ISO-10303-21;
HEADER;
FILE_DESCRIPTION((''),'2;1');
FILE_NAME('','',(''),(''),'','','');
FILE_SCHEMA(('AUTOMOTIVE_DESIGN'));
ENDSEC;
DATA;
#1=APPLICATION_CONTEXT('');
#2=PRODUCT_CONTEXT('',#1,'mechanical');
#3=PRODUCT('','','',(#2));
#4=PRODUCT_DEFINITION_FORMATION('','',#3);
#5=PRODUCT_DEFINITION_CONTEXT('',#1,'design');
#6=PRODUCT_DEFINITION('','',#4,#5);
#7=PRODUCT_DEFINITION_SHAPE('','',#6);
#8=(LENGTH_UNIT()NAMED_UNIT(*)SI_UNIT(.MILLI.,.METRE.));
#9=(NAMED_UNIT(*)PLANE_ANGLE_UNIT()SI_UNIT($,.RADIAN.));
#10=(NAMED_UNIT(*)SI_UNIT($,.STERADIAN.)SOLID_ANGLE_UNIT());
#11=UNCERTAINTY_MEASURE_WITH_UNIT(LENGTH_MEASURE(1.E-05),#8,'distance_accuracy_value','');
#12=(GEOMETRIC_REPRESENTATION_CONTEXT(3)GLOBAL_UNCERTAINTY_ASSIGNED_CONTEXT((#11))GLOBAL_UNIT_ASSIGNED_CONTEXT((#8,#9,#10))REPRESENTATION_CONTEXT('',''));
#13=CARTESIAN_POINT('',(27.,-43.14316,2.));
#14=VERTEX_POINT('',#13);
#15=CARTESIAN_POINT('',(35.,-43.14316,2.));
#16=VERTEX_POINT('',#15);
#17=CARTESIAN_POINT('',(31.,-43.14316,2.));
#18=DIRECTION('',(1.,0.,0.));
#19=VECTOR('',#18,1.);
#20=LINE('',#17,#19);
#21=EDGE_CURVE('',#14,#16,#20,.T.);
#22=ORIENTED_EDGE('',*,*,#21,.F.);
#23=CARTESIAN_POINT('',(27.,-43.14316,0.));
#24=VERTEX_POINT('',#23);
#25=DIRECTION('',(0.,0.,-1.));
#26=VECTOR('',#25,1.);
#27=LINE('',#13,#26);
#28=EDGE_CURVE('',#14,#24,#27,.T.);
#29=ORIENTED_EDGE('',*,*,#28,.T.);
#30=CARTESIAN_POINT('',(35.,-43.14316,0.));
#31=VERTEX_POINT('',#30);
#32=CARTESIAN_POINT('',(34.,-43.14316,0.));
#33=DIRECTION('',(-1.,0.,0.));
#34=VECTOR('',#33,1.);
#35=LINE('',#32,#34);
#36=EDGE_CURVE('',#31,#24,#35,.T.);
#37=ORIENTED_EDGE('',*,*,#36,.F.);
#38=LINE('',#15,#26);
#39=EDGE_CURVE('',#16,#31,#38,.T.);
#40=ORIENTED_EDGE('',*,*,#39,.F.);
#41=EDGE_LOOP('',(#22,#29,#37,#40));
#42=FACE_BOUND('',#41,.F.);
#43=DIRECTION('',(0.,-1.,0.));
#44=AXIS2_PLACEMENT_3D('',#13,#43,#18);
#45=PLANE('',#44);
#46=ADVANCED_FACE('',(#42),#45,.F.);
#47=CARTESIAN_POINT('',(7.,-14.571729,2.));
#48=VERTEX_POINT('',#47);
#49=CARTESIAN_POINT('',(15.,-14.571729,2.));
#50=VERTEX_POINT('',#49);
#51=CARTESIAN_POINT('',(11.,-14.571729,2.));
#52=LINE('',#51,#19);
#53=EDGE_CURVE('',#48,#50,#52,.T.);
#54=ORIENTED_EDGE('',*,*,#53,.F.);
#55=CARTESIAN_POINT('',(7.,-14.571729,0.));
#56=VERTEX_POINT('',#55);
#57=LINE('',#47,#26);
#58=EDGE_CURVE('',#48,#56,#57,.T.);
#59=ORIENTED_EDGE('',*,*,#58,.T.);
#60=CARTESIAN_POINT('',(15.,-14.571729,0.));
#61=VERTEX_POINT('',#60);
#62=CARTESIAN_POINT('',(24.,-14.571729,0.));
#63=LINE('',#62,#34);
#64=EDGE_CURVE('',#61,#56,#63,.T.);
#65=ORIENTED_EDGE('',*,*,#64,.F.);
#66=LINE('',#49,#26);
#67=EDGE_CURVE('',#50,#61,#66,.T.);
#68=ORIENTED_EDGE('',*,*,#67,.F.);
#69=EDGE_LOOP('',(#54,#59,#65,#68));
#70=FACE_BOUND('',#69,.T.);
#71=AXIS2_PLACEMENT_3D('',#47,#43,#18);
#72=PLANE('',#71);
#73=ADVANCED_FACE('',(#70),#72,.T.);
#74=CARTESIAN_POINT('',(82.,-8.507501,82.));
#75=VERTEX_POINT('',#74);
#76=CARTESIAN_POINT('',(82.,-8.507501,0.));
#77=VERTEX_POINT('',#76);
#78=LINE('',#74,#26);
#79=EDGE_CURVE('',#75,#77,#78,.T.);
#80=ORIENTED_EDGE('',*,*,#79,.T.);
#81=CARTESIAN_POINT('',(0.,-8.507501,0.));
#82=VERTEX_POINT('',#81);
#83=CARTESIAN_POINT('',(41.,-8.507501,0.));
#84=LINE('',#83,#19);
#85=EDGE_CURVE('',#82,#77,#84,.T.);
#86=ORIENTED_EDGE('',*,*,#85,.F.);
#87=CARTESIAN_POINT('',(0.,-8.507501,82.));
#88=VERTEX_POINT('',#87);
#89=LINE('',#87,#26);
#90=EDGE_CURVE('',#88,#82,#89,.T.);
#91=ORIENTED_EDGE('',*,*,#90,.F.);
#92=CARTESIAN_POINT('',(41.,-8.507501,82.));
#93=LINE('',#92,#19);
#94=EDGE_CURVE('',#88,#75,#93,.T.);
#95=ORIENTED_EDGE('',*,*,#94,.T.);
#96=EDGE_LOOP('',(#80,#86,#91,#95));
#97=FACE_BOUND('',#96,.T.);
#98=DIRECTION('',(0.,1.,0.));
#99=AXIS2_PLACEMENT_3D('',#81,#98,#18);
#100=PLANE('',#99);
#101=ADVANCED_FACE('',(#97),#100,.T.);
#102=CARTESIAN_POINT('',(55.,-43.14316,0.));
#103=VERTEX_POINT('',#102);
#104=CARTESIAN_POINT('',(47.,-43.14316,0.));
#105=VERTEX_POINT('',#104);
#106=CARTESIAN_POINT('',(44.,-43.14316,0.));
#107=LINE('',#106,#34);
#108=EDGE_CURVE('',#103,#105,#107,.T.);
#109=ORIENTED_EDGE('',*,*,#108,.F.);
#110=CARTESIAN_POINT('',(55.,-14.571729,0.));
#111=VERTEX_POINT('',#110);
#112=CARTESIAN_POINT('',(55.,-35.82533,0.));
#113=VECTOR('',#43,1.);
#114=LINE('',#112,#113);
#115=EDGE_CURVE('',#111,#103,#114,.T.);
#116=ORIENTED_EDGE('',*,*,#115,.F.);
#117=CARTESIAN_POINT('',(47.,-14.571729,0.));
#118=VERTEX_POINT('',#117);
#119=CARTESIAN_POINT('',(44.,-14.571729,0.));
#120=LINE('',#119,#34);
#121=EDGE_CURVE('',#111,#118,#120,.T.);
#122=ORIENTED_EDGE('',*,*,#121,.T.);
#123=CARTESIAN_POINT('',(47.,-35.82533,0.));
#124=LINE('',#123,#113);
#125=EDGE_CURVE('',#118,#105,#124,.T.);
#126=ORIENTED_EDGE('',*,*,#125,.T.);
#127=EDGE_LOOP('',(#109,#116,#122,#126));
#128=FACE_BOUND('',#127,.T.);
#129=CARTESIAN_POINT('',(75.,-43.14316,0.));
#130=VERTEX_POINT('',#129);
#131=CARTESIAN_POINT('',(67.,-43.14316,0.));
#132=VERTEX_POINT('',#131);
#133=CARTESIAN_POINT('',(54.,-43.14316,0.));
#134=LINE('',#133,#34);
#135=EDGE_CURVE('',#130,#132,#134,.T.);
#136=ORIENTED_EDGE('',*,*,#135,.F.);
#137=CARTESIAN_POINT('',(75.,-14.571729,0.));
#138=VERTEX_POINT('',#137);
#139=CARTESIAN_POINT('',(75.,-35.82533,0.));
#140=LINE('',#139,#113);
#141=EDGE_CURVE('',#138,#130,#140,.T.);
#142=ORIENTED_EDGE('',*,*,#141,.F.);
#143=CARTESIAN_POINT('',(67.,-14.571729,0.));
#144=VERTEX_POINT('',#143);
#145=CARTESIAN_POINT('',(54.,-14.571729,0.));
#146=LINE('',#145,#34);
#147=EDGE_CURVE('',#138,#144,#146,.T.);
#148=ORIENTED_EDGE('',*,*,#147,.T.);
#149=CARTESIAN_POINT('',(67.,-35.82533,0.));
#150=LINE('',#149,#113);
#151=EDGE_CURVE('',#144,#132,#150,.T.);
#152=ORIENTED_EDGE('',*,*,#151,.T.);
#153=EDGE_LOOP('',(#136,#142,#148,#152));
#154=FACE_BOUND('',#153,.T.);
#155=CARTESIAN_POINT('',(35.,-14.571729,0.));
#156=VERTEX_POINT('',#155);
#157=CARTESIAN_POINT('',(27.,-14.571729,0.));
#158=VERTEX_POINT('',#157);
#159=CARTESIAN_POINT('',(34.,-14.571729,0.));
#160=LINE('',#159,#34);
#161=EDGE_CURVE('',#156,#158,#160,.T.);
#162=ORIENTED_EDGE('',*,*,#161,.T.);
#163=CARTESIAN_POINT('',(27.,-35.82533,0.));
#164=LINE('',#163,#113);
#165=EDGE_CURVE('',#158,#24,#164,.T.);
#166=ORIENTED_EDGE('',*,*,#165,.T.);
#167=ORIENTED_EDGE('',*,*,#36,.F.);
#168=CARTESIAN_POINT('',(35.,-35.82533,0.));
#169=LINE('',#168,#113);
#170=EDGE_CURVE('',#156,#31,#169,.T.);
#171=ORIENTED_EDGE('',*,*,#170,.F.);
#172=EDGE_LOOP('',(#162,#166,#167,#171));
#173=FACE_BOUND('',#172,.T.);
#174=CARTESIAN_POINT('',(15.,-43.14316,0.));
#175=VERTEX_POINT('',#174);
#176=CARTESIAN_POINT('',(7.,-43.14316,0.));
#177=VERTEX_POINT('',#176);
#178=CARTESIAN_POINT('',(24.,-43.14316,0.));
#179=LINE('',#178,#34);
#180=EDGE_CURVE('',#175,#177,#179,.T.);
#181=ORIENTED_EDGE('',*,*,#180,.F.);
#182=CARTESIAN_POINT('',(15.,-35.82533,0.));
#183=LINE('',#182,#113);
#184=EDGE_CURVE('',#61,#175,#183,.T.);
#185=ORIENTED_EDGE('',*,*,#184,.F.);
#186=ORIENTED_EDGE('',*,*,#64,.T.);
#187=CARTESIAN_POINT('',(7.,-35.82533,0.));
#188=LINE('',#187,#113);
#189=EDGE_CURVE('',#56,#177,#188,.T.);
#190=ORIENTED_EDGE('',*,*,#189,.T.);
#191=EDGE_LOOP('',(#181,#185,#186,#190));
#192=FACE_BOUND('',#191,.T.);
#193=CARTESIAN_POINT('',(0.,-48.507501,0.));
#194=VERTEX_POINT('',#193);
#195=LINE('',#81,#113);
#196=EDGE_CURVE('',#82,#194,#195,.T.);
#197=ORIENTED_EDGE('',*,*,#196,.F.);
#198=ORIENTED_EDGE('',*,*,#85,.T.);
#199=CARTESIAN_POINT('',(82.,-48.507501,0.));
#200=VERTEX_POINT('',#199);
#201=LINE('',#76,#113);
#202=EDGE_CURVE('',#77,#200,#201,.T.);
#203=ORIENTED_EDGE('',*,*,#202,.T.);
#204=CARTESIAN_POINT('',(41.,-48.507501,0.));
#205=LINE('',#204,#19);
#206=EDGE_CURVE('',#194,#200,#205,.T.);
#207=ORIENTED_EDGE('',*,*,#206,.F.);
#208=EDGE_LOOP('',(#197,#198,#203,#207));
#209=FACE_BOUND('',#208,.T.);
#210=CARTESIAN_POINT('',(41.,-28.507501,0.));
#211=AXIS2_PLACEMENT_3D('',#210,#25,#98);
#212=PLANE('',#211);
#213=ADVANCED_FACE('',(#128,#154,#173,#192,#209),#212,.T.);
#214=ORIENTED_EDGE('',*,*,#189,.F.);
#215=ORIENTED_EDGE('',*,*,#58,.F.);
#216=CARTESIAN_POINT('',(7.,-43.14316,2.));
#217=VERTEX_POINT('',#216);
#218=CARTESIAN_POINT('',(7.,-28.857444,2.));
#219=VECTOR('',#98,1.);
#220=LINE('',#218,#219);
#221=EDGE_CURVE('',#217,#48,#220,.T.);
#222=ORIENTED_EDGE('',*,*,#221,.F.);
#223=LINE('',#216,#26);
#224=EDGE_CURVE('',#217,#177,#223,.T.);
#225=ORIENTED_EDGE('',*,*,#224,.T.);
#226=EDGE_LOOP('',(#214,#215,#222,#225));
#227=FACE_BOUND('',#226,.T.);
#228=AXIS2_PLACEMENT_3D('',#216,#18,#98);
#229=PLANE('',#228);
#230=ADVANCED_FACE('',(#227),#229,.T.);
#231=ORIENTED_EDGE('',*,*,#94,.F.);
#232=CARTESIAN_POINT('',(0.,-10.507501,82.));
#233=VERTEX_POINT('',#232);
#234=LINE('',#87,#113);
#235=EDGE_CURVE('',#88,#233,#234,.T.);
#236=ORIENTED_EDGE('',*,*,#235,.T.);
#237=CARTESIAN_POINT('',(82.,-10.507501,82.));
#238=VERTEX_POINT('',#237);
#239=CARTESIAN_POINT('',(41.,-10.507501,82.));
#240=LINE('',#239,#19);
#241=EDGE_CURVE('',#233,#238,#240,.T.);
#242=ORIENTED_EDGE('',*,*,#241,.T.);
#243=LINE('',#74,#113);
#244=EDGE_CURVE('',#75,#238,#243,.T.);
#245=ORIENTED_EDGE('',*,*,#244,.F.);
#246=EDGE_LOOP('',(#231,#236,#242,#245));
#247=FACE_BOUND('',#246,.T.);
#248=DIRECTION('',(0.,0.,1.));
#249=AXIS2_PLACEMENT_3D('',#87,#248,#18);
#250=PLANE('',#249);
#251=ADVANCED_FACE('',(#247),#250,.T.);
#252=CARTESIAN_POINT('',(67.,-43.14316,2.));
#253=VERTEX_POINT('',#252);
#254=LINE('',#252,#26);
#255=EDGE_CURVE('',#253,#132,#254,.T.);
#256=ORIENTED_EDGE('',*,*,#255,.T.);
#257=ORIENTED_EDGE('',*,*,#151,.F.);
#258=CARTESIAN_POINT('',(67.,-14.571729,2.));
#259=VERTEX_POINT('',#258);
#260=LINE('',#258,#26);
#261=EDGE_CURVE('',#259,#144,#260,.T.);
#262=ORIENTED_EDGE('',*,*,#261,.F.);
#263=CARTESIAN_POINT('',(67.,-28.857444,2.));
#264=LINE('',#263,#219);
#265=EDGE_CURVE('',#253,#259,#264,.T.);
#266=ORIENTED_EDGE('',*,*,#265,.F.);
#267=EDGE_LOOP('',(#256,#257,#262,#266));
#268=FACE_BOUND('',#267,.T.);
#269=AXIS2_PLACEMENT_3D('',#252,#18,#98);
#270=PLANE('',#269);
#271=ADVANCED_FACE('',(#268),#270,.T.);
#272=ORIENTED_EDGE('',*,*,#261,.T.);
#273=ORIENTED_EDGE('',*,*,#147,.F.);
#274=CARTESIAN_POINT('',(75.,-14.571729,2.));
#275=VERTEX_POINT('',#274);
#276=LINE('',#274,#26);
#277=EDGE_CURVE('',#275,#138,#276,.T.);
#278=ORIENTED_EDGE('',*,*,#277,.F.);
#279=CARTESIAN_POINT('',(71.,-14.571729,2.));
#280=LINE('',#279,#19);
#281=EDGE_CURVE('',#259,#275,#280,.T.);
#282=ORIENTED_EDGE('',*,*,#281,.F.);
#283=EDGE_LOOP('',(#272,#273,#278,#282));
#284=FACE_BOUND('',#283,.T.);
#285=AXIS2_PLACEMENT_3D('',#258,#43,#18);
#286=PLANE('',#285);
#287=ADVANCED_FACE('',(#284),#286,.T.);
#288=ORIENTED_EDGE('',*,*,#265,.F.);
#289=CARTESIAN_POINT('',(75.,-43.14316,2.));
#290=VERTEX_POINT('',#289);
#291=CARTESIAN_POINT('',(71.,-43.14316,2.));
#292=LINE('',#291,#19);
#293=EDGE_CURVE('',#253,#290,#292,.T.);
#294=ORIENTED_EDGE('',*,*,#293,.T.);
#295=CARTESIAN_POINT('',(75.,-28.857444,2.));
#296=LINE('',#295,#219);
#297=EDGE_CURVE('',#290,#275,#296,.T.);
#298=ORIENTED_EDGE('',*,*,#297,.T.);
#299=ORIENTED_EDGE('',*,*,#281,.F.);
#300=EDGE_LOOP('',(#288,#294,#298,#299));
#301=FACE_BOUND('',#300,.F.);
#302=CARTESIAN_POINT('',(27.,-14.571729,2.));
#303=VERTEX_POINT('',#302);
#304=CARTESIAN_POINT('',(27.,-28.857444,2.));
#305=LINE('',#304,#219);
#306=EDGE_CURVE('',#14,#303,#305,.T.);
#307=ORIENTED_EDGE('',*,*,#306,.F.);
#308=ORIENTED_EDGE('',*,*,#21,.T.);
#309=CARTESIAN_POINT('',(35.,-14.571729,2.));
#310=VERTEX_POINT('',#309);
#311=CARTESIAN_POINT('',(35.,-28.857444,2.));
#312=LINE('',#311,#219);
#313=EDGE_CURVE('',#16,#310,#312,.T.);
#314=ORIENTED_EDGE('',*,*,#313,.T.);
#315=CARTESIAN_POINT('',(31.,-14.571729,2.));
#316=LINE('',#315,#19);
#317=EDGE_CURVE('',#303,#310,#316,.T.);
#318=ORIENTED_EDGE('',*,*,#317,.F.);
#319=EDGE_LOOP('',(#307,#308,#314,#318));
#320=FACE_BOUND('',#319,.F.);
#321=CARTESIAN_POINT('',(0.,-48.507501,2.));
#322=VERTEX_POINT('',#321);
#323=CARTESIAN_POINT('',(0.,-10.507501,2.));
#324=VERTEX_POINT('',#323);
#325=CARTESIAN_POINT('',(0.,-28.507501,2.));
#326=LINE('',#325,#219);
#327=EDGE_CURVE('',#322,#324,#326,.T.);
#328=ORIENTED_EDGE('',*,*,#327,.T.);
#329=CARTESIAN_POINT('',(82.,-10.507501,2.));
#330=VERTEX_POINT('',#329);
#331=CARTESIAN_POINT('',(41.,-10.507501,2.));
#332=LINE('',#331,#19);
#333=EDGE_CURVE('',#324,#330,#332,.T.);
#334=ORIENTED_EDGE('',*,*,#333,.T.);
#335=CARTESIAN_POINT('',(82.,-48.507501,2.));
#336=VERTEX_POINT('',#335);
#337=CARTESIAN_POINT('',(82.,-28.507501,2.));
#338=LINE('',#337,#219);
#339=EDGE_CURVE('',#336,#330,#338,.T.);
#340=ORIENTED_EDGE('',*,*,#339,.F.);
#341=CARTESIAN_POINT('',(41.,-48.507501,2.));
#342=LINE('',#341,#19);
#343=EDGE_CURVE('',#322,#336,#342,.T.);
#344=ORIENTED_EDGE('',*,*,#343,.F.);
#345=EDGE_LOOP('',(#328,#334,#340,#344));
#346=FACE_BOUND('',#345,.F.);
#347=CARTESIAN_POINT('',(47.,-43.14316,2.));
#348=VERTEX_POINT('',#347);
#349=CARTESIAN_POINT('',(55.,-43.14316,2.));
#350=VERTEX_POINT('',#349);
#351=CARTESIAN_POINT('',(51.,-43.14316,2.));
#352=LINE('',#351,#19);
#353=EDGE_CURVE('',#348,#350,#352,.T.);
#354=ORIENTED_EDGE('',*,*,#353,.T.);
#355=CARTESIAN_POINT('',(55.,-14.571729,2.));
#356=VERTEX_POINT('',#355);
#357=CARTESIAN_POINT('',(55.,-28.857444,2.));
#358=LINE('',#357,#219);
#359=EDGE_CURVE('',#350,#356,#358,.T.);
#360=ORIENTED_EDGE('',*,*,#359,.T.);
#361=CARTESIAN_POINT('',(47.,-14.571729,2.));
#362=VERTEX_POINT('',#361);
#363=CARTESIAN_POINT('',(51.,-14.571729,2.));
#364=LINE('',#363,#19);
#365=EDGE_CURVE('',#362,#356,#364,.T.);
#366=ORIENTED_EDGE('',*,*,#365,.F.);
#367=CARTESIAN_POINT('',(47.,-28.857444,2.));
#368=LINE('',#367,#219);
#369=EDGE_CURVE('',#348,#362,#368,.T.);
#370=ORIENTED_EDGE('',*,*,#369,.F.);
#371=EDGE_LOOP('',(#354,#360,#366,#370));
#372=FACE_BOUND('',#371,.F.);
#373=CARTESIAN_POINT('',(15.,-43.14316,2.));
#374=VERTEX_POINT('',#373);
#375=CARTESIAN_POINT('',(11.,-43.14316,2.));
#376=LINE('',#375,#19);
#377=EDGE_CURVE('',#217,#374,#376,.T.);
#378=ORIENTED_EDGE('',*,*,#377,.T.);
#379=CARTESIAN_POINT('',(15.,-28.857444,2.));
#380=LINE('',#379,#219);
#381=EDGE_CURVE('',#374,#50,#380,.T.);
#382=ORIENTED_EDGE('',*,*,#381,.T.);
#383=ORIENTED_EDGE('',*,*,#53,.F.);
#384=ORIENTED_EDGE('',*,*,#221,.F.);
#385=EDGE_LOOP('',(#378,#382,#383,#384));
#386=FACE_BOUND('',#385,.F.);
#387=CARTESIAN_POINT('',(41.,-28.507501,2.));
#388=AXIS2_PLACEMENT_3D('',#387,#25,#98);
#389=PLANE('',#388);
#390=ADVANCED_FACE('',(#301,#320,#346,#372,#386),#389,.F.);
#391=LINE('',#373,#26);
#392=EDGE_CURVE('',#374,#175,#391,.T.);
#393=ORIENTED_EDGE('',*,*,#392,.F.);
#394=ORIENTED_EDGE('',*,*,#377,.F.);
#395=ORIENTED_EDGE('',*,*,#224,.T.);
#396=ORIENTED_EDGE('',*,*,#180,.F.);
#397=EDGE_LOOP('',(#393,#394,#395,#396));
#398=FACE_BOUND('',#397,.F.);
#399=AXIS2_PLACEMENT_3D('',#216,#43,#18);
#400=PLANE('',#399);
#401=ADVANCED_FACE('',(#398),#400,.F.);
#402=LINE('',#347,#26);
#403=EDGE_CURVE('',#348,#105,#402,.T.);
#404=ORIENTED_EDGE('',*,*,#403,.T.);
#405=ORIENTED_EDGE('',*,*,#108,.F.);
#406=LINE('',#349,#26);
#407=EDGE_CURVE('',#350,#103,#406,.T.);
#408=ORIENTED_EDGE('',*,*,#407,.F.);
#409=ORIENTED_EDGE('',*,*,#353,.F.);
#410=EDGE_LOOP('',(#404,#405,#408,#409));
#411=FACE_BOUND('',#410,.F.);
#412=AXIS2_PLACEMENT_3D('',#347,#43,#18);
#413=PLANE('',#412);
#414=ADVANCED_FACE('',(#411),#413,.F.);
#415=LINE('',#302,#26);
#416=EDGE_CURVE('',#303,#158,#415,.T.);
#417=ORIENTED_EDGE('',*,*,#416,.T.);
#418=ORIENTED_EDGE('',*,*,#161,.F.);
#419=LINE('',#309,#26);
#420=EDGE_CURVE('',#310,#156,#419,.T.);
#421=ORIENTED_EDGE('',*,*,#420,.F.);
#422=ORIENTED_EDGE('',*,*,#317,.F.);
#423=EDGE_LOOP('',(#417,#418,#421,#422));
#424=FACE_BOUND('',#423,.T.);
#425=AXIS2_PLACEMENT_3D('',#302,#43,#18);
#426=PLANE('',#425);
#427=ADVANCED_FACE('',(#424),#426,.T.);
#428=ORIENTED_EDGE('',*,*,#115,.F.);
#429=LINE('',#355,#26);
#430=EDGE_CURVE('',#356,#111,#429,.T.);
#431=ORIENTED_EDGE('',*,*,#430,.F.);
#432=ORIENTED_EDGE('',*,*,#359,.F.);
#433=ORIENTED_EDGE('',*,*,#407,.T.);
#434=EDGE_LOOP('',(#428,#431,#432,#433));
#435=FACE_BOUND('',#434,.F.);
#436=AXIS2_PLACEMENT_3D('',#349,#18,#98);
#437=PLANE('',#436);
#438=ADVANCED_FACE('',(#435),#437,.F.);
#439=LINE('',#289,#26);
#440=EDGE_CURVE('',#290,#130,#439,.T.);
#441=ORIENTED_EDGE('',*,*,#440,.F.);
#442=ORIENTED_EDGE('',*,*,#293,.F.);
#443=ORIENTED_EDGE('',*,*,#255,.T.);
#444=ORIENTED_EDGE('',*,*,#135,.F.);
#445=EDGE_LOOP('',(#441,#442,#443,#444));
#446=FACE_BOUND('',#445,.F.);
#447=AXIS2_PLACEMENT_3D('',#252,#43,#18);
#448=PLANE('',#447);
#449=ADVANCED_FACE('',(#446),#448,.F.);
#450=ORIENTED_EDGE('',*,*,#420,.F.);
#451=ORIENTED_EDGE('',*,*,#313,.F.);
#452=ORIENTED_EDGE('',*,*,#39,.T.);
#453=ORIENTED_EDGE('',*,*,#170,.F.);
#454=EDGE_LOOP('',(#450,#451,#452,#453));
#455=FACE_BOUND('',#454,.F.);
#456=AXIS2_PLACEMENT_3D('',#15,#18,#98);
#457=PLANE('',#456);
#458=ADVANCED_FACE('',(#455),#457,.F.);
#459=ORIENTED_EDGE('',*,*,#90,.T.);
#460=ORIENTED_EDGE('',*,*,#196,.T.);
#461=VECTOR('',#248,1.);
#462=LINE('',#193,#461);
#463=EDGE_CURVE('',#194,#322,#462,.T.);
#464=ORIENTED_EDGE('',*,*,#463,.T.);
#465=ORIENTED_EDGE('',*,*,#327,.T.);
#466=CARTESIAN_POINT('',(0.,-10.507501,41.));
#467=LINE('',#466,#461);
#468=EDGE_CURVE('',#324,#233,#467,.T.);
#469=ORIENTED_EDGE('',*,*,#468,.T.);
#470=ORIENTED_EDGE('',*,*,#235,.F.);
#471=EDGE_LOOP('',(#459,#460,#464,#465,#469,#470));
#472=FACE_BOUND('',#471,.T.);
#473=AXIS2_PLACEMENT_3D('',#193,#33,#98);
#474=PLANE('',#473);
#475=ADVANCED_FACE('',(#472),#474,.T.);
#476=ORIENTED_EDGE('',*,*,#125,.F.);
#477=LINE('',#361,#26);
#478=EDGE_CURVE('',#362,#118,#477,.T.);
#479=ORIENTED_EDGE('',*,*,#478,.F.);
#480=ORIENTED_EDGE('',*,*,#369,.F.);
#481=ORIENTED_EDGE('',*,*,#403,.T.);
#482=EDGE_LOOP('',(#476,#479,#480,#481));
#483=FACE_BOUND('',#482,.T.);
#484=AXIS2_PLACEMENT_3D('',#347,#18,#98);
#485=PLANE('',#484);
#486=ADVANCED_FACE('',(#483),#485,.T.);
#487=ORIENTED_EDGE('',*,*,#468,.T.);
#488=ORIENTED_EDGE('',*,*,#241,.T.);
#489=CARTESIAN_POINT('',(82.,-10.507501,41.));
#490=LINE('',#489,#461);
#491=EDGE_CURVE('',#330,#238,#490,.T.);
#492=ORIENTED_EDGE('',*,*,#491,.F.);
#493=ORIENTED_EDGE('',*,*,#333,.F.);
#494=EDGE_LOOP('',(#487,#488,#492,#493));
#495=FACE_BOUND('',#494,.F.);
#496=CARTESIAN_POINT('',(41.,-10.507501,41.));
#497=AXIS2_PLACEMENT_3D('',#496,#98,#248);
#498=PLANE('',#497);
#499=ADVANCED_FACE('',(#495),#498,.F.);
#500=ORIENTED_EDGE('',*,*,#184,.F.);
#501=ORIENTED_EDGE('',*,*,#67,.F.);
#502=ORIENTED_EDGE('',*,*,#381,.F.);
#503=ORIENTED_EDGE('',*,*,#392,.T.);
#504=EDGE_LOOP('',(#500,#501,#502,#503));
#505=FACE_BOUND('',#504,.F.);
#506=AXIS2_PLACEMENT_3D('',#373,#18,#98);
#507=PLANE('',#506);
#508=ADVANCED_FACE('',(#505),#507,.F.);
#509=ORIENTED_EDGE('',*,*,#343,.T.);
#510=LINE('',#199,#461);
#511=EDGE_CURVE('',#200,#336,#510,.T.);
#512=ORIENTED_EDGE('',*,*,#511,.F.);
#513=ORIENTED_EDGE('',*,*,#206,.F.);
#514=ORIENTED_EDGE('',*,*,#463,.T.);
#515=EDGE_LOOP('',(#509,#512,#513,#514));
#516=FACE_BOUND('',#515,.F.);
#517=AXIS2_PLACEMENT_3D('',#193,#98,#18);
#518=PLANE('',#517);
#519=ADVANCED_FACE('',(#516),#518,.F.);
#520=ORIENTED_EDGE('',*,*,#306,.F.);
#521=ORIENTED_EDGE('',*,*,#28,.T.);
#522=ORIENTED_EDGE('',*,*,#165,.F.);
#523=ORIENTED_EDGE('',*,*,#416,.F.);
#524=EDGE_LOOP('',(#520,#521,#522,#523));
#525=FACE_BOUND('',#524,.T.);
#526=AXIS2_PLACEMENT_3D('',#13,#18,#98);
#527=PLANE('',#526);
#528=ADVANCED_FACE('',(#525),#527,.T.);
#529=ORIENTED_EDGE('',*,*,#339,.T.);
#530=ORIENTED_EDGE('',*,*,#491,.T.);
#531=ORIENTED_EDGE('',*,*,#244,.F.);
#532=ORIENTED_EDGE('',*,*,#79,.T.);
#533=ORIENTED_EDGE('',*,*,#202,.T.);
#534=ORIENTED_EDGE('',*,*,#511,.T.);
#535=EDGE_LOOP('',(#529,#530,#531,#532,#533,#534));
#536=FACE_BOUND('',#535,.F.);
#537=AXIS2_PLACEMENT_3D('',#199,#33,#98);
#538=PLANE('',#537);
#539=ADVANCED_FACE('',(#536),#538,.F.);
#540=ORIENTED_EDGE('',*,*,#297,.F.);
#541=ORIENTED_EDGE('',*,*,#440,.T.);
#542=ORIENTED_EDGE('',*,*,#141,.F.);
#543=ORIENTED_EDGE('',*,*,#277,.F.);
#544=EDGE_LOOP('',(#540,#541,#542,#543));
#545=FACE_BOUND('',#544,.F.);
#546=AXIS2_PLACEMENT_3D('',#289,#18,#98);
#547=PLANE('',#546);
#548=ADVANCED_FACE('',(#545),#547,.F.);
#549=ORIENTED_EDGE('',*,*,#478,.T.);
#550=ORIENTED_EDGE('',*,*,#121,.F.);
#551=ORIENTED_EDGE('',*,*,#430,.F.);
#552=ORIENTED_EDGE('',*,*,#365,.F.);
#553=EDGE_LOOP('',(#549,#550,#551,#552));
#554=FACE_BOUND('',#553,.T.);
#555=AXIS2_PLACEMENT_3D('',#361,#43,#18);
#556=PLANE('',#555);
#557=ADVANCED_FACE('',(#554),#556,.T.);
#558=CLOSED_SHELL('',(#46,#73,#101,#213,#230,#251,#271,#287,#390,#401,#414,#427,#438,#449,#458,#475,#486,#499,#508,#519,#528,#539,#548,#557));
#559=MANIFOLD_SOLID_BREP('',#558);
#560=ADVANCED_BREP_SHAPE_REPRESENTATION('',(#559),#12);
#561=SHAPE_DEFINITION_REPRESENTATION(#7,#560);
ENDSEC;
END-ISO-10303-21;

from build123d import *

# Parameters (mm, degrees)
F1_E0_W  = 40
F1_E0_H  = 82
F2_DEPTH = 2
F1_E1_W  = 82
F1_E1_H  = 82
F3_DEPTH = 2
F4_W     = 8
F4_H     = 28.5714303715
F5_DEPTH = 2.001


with BuildPart() as f2:
    # F1_E0 (on explicit) → F2 (new body)
    with BuildSketch(Plane(origin=(0, -48.5075005184, 0), x_dir=(0, 1, 0), z_dir=(0, 0, -1))):
        with Locations((20, 41)):
            Rectangle(F1_E0_W, F1_E0_H)
    extrude(amount=-F2_DEPTH)

    # F1_E1 (on explicit) → F3 (join)
    with BuildSketch(Plane.ZX.offset(-8.5075005184)):
        with Locations((41, 41)):
            Rectangle(F1_E1_W, F1_E1_H)
    extrude(amount=-F3_DEPTH)

    # F4 (on face) → F5 (cut, through all)
    with BuildSketch(Plane.XY.offset(2)):
        with Locations((71, -28.857444413)):
            Rectangle(F4_W, F4_H)
        with Locations((51, -28.857444413)):
            Rectangle(F4_W, F4_H)
        with Locations((31, -28.857444413)):
            Rectangle(F4_W, F4_H)
        with Locations((11, -28.857444413)):
            Rectangle(F4_W, F4_H)
    extrude(amount=-F5_DEPTH, mode=Mode.SUBTRACT)


solid = f2.part
